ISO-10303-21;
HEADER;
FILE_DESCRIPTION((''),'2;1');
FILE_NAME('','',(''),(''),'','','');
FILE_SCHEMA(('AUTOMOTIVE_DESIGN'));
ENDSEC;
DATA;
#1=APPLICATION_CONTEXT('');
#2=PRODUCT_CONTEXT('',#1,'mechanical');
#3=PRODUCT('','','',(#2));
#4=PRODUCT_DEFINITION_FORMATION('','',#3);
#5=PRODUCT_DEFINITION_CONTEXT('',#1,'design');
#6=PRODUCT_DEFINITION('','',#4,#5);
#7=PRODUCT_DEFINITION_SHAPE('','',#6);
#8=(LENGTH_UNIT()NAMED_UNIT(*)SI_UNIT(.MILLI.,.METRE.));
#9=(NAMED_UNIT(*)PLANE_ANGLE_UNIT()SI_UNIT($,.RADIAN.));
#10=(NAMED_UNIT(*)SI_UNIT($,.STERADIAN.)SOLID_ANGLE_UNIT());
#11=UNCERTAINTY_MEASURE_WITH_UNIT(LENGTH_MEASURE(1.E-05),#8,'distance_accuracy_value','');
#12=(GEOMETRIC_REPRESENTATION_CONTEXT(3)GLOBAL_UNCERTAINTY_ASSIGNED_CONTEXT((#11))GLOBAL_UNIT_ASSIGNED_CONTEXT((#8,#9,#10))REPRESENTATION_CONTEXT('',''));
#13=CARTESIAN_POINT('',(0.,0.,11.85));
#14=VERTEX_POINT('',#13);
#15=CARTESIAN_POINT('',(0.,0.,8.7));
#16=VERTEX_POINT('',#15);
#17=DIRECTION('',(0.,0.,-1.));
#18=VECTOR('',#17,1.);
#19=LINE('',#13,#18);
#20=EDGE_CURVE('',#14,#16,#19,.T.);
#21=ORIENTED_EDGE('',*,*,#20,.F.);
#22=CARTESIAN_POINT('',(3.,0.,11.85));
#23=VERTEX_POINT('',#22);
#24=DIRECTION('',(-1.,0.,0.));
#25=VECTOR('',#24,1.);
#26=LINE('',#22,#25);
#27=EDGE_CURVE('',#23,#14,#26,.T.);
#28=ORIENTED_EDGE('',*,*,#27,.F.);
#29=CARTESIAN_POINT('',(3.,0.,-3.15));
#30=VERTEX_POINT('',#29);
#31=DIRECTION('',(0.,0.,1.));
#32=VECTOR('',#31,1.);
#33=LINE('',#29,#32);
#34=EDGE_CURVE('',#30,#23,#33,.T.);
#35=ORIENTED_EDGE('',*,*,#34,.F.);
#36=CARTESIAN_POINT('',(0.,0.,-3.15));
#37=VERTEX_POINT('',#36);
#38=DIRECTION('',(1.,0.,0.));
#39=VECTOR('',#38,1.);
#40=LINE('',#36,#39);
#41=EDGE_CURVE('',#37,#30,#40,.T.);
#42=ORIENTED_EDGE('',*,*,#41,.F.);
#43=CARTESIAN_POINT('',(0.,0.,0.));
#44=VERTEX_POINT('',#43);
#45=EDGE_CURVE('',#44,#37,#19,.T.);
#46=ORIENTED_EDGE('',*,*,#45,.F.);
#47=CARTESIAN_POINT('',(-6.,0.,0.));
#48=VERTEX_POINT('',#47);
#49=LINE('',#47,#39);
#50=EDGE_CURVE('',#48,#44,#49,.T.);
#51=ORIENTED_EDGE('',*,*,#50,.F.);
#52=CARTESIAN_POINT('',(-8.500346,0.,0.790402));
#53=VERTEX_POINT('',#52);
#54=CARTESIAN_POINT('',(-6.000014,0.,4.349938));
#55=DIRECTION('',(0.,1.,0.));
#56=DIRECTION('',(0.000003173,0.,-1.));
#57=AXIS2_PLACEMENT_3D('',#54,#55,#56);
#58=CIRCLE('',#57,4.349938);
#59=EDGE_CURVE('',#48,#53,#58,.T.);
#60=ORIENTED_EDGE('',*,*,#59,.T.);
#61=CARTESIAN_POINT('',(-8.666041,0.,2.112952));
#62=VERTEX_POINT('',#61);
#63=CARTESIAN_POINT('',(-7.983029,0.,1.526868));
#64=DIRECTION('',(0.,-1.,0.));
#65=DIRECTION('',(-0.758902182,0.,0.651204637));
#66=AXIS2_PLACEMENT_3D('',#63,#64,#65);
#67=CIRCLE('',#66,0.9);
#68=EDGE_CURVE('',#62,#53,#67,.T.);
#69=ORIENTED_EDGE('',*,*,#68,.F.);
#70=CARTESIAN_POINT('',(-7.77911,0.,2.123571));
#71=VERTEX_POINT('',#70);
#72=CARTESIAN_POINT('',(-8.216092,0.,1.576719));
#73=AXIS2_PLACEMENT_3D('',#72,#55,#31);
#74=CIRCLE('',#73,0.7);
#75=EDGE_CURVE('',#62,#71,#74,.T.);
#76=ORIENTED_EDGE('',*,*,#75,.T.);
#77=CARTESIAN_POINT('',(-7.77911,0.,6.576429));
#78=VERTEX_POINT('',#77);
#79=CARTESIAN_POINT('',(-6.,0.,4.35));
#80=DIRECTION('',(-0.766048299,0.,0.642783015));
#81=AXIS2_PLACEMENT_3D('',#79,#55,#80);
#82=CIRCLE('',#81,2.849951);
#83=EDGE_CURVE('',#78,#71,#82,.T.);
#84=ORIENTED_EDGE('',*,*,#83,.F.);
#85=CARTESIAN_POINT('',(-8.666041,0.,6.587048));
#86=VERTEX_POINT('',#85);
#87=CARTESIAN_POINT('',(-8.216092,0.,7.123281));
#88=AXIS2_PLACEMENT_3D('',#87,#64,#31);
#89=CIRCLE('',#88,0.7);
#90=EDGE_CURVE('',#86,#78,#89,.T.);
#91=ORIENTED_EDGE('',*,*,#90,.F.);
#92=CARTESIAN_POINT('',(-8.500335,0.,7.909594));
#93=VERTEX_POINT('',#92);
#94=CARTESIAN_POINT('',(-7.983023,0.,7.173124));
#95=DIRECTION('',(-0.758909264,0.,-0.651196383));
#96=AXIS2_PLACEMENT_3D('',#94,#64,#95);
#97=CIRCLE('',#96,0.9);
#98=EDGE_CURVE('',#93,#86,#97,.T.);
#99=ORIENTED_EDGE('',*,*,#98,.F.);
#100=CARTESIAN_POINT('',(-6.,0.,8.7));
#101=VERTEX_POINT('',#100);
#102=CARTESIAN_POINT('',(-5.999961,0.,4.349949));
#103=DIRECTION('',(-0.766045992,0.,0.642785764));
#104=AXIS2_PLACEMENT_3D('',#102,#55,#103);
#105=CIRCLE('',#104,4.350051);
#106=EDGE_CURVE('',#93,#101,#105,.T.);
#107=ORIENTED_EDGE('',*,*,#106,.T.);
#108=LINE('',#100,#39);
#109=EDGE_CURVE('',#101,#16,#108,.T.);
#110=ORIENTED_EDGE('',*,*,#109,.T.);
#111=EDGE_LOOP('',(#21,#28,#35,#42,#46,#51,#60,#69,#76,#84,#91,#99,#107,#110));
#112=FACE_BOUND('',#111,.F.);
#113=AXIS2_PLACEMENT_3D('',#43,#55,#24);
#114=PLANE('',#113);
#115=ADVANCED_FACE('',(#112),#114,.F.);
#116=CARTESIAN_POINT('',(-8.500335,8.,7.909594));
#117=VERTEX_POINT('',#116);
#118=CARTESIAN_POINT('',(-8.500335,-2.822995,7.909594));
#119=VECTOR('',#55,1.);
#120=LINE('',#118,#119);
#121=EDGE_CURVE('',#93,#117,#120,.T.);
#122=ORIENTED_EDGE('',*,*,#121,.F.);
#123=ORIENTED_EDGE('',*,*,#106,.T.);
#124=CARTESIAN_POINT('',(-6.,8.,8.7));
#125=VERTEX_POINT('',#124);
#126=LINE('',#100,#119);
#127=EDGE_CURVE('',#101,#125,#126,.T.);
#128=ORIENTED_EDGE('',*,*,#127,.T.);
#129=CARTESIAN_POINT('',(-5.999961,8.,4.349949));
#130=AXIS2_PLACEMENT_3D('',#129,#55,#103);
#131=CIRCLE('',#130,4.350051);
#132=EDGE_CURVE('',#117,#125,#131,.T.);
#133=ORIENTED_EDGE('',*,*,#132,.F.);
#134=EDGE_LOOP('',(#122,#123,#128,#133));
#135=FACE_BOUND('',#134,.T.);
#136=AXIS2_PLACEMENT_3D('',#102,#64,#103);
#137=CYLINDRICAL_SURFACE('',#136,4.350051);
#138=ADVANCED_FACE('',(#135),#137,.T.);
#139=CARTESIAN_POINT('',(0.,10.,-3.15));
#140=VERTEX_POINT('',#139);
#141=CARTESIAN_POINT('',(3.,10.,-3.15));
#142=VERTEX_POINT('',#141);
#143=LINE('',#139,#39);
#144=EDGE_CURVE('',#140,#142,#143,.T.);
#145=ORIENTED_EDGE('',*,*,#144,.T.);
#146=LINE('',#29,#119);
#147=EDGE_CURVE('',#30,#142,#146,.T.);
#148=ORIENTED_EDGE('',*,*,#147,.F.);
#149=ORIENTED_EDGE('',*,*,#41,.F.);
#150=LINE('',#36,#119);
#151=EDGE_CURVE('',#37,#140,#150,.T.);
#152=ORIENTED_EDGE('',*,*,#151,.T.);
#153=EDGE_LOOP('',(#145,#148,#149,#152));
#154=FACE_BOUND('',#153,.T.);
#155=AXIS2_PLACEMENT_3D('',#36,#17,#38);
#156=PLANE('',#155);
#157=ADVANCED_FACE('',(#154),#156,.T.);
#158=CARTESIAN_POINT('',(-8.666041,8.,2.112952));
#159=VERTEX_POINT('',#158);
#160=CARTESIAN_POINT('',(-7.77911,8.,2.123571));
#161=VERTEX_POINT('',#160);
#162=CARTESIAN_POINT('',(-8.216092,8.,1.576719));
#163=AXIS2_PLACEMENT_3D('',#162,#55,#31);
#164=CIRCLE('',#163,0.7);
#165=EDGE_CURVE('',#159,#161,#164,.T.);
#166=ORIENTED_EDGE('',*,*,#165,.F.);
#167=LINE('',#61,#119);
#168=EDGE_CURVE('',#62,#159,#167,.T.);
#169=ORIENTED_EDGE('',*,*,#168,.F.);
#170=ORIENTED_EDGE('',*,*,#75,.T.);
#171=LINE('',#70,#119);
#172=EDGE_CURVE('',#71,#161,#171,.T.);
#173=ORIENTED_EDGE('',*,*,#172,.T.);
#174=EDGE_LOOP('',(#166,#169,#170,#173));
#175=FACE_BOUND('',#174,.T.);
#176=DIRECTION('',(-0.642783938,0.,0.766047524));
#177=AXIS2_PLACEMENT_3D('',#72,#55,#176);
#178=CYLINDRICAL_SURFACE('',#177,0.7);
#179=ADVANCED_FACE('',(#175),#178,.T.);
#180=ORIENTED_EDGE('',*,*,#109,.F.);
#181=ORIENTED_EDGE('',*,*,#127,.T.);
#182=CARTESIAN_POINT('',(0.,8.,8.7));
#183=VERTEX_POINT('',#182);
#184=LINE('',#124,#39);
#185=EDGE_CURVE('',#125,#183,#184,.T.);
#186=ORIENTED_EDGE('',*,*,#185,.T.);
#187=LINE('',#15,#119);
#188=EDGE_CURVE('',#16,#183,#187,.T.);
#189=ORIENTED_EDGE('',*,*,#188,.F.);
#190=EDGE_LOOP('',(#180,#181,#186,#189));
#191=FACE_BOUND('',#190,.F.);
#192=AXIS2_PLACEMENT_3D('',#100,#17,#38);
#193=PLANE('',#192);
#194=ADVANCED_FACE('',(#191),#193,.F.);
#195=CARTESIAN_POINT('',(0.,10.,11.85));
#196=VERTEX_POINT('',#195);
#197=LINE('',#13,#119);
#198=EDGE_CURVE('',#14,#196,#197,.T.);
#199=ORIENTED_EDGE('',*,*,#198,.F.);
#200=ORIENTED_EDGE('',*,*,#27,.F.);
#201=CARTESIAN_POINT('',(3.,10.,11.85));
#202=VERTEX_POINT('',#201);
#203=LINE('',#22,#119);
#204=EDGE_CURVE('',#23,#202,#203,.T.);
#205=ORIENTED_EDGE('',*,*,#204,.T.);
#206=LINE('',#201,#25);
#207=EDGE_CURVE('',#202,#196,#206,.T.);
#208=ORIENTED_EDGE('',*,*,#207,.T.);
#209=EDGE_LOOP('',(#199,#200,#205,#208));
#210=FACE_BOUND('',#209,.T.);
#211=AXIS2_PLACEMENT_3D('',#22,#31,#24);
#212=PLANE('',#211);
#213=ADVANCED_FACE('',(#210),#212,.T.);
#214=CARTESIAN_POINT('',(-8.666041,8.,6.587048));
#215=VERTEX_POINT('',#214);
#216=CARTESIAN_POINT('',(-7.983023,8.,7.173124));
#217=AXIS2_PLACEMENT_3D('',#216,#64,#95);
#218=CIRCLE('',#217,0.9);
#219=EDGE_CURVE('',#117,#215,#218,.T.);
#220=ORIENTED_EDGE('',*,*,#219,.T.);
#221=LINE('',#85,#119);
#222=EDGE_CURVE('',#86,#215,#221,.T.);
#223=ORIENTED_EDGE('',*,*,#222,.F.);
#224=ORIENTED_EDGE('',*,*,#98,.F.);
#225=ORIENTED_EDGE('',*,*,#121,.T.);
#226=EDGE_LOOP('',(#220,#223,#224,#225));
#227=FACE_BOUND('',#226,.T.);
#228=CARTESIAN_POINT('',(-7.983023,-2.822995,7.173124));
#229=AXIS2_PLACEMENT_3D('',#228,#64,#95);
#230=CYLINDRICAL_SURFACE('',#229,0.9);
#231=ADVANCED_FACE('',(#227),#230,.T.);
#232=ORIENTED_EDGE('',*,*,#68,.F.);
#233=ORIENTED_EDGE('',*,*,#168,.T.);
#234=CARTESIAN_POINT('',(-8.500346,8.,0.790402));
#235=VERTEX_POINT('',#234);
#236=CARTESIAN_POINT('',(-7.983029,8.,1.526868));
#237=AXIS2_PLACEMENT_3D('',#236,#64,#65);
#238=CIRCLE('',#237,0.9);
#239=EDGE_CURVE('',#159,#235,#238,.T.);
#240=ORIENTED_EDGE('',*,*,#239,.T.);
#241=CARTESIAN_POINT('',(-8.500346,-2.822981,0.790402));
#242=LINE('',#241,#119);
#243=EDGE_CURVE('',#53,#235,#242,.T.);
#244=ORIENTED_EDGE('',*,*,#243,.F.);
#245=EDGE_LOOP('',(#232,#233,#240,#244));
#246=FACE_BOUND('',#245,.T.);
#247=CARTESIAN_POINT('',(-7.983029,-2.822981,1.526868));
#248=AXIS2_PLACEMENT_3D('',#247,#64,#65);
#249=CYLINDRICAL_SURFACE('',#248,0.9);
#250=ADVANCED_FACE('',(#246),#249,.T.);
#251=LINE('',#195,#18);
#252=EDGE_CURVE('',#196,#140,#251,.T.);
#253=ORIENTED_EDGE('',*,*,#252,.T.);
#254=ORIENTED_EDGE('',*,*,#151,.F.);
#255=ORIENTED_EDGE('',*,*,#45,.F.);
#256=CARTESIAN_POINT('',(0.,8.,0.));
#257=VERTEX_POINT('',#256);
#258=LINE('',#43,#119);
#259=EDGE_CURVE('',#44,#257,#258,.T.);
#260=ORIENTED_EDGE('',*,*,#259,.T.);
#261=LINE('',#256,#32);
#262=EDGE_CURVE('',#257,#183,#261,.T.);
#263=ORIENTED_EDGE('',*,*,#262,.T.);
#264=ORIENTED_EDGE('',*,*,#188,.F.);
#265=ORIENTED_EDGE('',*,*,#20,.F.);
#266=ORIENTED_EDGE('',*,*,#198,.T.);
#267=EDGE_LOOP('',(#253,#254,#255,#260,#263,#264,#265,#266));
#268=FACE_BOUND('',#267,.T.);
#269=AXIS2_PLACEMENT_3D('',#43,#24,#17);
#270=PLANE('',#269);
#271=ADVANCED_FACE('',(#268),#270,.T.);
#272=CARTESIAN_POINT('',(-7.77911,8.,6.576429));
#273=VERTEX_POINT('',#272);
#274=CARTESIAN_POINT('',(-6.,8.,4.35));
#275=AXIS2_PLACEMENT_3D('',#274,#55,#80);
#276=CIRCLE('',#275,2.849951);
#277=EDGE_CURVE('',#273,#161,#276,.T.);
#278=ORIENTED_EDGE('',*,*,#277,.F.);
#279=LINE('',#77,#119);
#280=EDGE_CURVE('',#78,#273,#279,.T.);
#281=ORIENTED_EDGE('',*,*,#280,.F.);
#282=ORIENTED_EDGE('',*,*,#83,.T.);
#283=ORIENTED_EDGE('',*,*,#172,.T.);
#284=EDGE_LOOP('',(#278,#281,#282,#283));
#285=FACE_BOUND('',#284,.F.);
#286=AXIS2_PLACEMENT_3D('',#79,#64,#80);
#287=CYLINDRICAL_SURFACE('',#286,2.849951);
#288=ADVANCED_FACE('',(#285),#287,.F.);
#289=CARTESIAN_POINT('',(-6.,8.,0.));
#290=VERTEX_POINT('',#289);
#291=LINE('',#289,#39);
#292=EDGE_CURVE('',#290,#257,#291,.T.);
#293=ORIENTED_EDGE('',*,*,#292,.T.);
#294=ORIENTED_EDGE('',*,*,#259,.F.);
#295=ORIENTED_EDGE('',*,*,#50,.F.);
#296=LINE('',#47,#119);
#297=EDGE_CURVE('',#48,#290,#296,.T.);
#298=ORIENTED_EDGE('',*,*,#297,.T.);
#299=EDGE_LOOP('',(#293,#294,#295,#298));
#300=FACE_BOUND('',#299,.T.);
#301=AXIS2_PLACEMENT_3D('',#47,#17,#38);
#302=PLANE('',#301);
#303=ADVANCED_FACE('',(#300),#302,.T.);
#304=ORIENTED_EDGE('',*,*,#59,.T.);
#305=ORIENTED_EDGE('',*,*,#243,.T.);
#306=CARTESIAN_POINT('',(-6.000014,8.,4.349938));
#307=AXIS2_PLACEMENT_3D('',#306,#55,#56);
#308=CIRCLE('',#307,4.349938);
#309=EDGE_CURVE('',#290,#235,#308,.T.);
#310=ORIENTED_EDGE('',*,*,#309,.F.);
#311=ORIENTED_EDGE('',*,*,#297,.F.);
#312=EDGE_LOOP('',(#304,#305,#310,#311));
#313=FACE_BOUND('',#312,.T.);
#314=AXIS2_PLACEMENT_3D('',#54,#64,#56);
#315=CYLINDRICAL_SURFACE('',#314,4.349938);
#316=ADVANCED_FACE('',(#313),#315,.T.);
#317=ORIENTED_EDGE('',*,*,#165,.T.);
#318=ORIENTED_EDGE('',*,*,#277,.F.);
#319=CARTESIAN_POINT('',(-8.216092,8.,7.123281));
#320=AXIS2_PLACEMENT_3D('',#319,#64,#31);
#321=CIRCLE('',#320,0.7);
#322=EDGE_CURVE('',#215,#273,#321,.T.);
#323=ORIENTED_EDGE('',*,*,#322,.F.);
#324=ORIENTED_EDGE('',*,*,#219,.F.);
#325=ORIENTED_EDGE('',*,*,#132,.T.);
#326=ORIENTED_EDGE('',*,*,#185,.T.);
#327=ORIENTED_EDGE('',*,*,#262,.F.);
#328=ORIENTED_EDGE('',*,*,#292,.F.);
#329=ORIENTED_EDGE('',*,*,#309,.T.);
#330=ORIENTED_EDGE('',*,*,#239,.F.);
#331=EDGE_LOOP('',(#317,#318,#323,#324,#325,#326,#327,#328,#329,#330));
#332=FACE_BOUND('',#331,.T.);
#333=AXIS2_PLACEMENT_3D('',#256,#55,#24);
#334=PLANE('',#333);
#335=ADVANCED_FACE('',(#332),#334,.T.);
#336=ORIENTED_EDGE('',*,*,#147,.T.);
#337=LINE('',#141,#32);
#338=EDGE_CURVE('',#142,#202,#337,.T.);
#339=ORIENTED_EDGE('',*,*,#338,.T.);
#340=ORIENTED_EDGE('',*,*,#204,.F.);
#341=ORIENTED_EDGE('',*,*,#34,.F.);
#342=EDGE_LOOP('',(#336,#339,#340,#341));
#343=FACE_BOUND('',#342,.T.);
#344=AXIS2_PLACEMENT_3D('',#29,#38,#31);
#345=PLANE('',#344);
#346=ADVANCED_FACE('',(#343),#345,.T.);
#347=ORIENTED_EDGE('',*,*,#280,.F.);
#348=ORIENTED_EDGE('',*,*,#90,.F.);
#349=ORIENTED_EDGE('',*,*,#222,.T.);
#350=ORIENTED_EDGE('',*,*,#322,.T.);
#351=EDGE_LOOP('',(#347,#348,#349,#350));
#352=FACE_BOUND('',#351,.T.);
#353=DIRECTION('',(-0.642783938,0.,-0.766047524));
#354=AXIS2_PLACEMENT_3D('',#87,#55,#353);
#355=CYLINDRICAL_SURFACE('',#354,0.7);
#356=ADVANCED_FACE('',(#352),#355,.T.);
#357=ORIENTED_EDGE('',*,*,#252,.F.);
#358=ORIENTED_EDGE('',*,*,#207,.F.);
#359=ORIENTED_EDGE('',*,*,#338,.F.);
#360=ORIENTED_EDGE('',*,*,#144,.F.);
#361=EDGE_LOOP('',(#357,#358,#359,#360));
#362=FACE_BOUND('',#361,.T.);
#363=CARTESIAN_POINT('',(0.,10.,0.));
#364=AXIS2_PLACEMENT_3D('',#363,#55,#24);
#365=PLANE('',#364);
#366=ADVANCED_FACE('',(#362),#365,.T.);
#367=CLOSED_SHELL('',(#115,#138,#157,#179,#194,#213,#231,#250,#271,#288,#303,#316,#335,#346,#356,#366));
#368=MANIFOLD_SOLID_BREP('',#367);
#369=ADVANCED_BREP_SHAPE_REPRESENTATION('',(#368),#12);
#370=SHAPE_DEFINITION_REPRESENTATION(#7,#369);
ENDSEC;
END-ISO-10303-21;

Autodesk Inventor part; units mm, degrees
ref_plane "YZ Plane" through (0, 0, 0) normal (1, 0, 0) x (0, 1, 0)
ref_plane "XZ Plane" through (0, 0, 0) normal (0, 1, 0) x (-1, 0, 0)
ref_plane "XY Plane" through (0, 0, 0) normal (0, 0, 1) x (1, 0, 0)
sketch "Эскиз1" plane through (0, 0, 0) normal (0, 1, 0) x (-1, 0, 0)
  line L0 (0, 25.8601) -> (0, -22.7313) construction
  arc A0 (8.1832, 2.5181) -> (8.1832, 6.1819) centre (6, 4.35) ccw construction
  line L1 (6, 4.35) -> (8.85, 4.35) construction
  line L2 (6, 4.35) -> (8.1832, 2.5181) construction
  line L3 (6, 4.35) -> (8.1832, 6.1819) construction
  arc A1 (6, 8.7) -> (6, 0) centre (6, 4.35) ccw construction
  line L4 (6, 0) -> (0, 0)
  line L5 (6, 8.7) -> (0, 8.7)
  arc A2 (9.3323, 7.1461) -> (6, 8.7) centre (6, 4.35) ccw
  arc A3 (9.3323, 1.5539) -> (9.3323, 7.1461) centre (6, 4.35) ccw construction
  arc A4 (6, 0) -> (9.3323, 1.5539) centre (6, 4.35) ccw
  line L6 (8.1832, 2.5181) -> (9.3323, 1.5539)
  line L7 (8.1832, 6.1819) -> (9.3323, 7.1461)
  arc A5 (8.1832, 6.1819) -> (8.1832, 2.5181) centre (6, 4.35) ccw
  line L8 (0, 0) -> (0, 8.7)
  line L9 (-3, 11.85) -> (0, 11.85)
  line L10 (0, 11.85) -> (0, -3.15)
  line L11 (0, -3.15) -> (-3, -3.15)
  line L12 (-3, -3.15) -> (-3, 11.85)
  point P0 (0, 4.35)
  point P1 (0, 0)
  point P2 (0, 8.7)
  dimension "d0" = 5.7
  dimension "d1" = 80
  dimension "d3" = 6
  dimension "d6" = 15
  dimension "d7" = 3
  dimension "d12" = 1.5
  dimension "d15" = 80
extrude "Выдавливание1" add sketch "Эскиз1" along normal blind 8 contours L4 L8 L5 A2 L7 A5 L6 A4
extrude "Выдавливание2" add sketch "Эскиз1" along normal blind 10 contours L10 L11 L12 L9 L8
fillet "Сопряжение3" radius 0.7 2 edges at (-8.1832, 4, 2.5181) (-8.1832, 4, 6.1819)
fillet "Сопряжение4" radius 0.9 2 edges at (-9.3323, 4, 1.5539) (-9.3323, 4, 7.1461)
properties part number "stand_mount_example"
